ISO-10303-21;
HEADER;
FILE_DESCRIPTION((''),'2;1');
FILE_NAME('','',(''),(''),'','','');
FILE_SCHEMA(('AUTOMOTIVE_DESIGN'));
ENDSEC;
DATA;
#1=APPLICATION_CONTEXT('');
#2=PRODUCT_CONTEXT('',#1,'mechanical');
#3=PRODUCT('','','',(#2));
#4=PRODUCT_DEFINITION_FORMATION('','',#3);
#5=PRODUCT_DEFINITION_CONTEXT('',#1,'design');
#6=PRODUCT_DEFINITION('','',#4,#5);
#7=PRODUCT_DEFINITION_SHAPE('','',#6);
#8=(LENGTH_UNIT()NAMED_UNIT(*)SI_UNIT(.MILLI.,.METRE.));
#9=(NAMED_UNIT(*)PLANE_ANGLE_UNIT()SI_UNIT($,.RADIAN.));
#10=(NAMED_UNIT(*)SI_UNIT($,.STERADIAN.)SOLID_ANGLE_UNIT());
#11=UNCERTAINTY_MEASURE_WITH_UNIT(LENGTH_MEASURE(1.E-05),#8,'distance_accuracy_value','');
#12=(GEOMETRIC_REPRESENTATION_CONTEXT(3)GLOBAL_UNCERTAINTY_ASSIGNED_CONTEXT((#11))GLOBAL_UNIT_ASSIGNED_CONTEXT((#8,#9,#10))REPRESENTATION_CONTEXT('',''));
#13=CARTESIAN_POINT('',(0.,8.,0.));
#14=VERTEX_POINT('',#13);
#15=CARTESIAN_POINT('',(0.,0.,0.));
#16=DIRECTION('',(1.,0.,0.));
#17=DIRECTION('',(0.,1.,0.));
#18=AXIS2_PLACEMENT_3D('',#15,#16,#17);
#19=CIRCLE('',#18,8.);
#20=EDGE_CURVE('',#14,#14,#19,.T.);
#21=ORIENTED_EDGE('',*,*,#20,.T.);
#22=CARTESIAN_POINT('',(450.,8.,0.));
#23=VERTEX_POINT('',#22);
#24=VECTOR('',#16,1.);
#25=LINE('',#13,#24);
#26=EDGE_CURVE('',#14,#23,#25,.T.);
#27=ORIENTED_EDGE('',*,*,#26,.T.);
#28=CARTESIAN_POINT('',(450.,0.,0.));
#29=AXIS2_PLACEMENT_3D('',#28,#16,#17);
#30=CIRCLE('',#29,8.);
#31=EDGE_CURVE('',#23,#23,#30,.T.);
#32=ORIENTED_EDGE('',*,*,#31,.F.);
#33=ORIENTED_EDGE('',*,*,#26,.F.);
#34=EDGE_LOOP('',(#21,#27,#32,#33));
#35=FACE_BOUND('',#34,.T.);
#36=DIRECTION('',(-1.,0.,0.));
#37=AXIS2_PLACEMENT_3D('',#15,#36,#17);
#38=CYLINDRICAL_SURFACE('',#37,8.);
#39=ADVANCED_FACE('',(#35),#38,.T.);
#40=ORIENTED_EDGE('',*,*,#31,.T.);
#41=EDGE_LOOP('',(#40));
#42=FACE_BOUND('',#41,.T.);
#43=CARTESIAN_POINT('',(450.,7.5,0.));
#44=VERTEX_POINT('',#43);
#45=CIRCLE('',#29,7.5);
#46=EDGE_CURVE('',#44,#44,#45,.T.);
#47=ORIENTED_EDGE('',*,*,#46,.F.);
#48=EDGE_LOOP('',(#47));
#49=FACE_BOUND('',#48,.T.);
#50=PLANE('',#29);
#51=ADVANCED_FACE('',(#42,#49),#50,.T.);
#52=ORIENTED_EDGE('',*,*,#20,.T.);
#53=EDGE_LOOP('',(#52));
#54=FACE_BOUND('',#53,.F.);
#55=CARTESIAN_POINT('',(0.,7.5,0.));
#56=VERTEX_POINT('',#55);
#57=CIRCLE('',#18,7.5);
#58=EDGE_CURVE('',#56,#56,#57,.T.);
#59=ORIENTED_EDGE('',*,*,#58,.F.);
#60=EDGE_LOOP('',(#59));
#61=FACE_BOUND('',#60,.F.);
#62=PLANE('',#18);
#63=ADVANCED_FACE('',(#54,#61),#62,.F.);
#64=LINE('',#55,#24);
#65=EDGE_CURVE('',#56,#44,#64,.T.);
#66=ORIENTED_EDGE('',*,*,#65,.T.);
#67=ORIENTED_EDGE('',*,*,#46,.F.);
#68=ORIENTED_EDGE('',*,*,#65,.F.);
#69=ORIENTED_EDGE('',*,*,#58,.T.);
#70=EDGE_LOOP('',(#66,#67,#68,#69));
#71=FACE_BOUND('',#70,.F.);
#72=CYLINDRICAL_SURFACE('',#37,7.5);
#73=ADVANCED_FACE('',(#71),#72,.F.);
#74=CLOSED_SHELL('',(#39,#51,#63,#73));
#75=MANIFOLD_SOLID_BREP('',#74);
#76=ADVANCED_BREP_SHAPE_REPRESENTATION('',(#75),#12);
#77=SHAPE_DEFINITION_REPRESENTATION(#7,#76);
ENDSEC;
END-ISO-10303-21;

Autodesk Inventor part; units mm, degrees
ref_plane "YZ Plane" through (0, 0, 0) normal (1, 0, 0) x (0, 1, 0)
ref_plane "XZ Plane" through (0, 0, 0) normal (0, 1, 0) x (-1, 0, 0)
ref_plane "XY Plane" through (0, 0, 0) normal (0, 0, 1) x (1, 0, 0)
sketch "Sketch1" plane through (0, 0, 0) normal (1, 0, 0) x (0, 1, 0)
  circle A0 centre (0, 0) radius 8
  circle A1 centre (0, 0) radius 7.5
  dimension "d0" = 16
  dimension "d1" = 15
extrude "Extrusion1" add sketch "Sketch1" along normal blind 450
properties part number "tailBoom"
